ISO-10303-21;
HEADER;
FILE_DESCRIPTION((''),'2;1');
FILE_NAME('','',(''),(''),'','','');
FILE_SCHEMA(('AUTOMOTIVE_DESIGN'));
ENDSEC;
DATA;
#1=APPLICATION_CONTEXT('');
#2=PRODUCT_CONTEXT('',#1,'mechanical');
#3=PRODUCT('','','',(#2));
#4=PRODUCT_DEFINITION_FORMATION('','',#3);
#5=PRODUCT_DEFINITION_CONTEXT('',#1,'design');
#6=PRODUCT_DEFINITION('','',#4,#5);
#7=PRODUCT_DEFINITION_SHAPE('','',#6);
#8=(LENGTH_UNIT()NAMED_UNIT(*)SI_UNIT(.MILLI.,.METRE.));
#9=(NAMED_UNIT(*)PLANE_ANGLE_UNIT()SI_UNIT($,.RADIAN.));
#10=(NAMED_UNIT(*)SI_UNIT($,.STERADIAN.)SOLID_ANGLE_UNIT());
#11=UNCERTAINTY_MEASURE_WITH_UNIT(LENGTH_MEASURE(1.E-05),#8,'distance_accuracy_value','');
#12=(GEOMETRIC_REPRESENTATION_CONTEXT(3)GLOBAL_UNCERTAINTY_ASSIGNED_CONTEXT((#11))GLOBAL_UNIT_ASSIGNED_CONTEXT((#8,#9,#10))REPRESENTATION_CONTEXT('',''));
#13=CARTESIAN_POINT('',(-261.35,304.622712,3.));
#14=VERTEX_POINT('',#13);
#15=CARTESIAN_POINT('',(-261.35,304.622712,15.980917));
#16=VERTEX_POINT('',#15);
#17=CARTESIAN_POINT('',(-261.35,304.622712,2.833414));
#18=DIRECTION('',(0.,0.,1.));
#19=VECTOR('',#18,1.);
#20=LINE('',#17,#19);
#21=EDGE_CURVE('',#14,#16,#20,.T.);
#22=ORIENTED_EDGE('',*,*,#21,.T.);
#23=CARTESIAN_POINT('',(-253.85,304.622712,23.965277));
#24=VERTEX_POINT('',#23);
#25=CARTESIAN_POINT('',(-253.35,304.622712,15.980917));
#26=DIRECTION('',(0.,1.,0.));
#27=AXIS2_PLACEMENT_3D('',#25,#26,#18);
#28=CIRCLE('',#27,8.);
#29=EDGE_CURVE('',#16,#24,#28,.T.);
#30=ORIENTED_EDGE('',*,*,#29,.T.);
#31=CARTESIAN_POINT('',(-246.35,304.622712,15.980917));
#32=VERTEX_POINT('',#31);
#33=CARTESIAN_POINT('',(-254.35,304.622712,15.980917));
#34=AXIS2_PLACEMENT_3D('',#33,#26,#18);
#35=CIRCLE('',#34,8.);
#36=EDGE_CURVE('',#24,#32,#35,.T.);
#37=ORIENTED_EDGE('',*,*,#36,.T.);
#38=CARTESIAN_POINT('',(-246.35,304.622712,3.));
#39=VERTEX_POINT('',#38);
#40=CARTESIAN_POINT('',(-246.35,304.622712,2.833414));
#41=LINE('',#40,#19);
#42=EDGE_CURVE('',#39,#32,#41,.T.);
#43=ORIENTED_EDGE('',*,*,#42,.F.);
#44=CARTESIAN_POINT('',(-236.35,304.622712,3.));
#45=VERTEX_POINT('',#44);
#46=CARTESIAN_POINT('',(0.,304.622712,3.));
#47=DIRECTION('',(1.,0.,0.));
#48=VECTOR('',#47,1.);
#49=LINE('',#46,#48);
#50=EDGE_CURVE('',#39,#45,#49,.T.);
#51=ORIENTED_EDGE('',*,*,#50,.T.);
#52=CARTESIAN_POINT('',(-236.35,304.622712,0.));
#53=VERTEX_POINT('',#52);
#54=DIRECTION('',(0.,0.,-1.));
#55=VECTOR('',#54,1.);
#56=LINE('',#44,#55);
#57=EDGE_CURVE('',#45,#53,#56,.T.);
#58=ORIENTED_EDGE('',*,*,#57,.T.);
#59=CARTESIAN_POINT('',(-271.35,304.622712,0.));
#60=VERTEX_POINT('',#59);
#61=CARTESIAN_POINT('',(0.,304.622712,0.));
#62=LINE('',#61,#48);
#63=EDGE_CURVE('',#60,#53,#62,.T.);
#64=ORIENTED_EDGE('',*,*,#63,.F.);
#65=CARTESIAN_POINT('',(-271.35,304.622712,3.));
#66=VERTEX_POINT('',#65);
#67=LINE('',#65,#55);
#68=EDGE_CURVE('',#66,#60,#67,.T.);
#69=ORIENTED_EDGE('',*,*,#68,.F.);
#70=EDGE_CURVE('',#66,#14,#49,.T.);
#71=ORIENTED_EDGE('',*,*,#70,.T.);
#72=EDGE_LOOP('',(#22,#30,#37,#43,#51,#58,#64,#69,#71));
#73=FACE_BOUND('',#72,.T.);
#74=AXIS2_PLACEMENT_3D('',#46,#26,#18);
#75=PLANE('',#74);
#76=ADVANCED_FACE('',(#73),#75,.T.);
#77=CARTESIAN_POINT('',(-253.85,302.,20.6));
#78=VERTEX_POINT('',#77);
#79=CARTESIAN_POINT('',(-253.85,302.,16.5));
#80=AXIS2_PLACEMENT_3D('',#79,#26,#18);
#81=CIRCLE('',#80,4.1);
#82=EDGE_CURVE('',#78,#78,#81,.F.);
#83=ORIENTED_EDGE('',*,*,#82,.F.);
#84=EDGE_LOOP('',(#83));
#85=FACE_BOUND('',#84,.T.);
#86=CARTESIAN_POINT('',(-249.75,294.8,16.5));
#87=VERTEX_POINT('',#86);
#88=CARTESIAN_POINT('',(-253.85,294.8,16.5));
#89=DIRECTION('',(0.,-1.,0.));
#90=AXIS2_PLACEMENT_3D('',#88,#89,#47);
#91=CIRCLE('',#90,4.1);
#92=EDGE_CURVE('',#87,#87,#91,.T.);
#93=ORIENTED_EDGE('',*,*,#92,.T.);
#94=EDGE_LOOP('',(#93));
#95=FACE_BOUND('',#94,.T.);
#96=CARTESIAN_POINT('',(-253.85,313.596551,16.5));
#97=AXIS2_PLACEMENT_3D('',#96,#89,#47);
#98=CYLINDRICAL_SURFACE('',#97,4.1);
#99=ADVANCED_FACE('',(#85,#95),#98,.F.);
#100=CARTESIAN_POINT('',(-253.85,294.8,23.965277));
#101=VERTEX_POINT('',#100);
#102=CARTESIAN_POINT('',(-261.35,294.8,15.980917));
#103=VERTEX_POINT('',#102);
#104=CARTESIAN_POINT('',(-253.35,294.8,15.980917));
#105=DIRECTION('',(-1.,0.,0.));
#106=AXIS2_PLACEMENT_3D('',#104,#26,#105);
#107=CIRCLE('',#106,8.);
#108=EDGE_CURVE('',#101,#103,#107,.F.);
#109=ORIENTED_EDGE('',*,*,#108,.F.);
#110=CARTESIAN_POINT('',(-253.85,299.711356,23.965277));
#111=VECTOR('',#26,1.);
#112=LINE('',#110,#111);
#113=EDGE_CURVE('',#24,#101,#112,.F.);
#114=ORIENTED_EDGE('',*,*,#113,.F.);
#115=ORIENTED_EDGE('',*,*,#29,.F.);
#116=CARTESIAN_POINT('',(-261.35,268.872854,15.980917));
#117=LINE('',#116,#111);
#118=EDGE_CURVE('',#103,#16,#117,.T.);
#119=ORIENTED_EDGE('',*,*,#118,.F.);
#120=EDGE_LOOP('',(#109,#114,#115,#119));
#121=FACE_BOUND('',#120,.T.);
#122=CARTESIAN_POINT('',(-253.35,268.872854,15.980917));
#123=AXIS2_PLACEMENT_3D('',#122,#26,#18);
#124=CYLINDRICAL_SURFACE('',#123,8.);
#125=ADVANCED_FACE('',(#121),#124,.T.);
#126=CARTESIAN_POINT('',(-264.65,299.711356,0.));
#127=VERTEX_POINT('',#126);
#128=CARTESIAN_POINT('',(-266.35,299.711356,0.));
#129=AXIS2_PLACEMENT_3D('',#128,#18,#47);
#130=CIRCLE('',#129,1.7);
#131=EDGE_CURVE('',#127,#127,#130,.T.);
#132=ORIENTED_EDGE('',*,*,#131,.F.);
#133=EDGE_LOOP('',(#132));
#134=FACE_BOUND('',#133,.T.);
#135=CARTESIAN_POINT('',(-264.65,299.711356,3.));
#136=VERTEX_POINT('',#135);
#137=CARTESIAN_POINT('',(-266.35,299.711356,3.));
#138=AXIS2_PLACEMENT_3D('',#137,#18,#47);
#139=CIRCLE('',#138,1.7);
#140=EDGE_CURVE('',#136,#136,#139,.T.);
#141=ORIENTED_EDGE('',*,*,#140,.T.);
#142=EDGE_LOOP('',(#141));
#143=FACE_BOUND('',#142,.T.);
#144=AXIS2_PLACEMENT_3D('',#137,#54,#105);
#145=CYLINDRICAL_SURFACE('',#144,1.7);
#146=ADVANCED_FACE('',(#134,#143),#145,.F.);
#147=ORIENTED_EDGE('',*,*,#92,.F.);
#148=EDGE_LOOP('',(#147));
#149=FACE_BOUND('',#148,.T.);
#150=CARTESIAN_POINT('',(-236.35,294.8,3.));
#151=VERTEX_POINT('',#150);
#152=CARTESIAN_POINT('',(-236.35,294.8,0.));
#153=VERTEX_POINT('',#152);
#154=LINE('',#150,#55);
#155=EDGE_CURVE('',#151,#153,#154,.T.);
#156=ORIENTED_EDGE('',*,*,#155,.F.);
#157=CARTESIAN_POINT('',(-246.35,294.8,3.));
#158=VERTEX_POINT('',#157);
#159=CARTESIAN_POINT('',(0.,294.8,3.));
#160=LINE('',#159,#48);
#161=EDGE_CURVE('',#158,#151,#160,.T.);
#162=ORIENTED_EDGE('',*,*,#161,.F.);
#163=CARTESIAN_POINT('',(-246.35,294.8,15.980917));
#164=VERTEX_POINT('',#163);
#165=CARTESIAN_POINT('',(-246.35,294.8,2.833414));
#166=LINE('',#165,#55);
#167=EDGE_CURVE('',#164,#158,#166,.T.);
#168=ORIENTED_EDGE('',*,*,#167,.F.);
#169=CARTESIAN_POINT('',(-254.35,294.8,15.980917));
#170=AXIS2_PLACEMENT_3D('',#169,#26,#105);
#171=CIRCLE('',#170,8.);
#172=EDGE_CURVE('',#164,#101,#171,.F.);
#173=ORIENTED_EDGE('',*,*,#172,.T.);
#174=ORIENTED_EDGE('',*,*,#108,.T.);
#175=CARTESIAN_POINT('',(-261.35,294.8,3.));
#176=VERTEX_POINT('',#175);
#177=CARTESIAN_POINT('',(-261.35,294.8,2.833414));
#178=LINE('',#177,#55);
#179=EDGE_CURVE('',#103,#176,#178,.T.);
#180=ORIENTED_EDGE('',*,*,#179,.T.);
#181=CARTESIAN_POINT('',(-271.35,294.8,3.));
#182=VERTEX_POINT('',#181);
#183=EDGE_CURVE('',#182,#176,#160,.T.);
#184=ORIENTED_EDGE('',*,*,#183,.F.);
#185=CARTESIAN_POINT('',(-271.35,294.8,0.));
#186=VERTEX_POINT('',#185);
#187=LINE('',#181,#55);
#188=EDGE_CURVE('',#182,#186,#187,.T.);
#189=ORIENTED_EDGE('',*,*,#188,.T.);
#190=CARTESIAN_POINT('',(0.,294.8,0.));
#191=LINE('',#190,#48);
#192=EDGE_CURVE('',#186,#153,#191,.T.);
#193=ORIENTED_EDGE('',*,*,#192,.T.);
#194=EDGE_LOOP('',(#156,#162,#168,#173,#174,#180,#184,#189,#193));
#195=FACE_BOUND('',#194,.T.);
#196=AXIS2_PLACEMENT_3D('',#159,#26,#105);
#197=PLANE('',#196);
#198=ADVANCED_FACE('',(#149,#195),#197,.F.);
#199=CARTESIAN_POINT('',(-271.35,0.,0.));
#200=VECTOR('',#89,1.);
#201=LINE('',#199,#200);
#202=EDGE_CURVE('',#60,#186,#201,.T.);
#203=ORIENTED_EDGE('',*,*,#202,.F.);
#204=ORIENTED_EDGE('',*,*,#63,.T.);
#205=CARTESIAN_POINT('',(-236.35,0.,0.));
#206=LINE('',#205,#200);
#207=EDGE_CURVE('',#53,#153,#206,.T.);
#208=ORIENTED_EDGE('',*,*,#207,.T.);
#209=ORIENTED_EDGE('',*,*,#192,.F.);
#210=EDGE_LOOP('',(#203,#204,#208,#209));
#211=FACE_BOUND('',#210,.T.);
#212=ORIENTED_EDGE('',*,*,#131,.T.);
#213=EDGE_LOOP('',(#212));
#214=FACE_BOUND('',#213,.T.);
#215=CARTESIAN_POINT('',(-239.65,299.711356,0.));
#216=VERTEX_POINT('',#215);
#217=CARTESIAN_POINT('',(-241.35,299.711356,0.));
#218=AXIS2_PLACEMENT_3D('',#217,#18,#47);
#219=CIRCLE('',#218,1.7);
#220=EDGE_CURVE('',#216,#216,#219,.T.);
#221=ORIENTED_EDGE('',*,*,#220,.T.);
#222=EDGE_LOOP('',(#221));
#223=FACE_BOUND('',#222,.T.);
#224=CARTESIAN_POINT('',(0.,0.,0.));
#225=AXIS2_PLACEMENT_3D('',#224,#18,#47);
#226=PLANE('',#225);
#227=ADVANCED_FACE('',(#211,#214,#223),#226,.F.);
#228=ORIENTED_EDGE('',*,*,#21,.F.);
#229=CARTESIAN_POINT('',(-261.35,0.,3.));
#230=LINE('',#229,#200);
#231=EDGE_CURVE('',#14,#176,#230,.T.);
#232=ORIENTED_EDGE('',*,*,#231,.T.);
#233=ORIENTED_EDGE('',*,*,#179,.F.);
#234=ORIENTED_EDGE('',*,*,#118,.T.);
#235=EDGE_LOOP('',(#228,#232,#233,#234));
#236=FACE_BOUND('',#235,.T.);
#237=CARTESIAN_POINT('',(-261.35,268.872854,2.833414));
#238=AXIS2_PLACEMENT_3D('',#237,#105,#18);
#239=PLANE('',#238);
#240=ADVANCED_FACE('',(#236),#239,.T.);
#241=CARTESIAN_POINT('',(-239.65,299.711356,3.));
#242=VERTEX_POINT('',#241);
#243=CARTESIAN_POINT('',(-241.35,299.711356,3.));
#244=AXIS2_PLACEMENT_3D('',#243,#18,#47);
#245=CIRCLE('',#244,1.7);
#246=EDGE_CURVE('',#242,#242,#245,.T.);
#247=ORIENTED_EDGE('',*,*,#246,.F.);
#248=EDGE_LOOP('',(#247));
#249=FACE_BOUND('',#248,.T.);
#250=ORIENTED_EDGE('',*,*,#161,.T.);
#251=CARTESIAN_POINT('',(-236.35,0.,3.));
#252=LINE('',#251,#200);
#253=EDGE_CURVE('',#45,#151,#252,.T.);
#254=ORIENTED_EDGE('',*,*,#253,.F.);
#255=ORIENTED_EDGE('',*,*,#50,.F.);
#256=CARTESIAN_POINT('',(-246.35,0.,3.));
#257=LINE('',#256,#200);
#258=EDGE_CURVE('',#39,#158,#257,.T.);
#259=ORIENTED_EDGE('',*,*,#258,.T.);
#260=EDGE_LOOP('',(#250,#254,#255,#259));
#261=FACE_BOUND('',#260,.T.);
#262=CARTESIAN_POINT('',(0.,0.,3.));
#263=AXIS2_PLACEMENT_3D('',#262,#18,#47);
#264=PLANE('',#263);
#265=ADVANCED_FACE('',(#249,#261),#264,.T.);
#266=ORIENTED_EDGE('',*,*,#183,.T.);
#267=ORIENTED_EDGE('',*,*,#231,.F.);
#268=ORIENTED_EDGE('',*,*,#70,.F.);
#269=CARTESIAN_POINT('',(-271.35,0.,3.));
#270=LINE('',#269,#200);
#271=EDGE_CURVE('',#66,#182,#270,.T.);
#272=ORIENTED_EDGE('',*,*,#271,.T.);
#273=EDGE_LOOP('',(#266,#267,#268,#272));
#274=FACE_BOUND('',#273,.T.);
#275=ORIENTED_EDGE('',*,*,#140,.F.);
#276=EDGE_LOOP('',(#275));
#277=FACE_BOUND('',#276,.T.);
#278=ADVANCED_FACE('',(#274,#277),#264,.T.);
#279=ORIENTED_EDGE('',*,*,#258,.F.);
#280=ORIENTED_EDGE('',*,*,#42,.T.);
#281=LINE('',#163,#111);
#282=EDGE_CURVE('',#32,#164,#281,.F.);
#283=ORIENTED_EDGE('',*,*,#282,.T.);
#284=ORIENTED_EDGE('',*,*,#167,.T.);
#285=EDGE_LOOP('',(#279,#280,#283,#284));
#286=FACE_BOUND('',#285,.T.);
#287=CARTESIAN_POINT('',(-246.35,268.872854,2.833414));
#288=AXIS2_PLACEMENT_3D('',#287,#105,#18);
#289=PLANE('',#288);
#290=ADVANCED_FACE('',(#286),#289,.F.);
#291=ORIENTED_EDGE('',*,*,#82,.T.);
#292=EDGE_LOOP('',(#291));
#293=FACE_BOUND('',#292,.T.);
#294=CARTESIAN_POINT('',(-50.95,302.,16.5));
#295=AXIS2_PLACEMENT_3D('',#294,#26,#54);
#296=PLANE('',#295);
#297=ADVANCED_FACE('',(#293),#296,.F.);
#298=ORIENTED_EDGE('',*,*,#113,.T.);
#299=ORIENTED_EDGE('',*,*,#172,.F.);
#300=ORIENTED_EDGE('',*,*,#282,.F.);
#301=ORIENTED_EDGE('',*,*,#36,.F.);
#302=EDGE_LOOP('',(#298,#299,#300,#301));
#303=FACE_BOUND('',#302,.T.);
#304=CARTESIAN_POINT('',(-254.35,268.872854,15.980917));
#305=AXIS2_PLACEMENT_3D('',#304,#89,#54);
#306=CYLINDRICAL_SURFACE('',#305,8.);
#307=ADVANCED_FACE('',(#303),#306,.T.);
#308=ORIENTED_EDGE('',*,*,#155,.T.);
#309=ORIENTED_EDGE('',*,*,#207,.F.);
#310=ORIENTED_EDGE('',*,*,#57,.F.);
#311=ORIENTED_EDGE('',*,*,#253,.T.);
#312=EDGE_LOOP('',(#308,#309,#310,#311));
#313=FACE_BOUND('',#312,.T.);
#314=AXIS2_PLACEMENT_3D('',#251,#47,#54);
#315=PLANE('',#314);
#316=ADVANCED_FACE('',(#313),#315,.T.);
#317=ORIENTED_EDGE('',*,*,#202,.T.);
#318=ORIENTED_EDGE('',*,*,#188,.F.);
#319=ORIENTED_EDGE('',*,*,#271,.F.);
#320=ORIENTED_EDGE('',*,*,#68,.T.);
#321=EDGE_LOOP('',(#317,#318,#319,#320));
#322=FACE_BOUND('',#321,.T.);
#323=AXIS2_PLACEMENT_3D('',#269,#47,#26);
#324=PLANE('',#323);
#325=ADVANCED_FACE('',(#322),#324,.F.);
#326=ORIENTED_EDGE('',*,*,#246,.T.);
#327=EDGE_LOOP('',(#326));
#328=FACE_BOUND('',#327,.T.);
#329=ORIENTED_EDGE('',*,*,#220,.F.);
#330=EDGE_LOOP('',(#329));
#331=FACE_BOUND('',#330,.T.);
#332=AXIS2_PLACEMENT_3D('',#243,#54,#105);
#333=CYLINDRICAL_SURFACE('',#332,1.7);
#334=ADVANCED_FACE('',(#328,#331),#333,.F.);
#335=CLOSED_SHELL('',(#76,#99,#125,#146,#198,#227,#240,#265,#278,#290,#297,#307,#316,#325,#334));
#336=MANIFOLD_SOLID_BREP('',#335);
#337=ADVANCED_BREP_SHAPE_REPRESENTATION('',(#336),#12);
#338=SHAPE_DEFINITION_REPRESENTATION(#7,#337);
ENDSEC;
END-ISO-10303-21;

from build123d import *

# Parameters (mm, degrees)
BOSS_EXTRUDE1_DEPTH = 3
SKETCH2_W           = 15
SKETCH2_H           = 21.14750363
BOSS_EXTRUDE2_DEPTH = 9.822712027
FILLET1_R           = 8
CUT_EXTRUDE1_START  = -7.2
SKETCH3_R           = 4.1
CUT_EXTRUDE1_DEPTH  = 7.2


with BuildPart() as part:
    # Sketch1 → Boss-Extrude1 (new body)
    with BuildSketch(Plane.XY):
        with BuildLine():
            Line((-241.35, 304.622712027), (-266.35, 304.622712027))
            Line((-266.35, 304.622712027), (-266.35, 301.411356013))
            ThreePointArc((-266.35, 301.411356013), (-265.147918472, 300.913437541), (-264.65, 299.711356013))
            ThreePointArc((-264.65, 299.711356013), (-265.147918472, 298.509274485), (-266.35, 298.011356013))
            Line((-266.35, 298.011356013), (-266.35, 294.8))
            Line((-266.35, 294.8), (-241.35, 294.8))
            Line((-241.35, 294.8), (-241.35, 298.011356013))
            ThreePointArc((-241.35, 298.011356013), (-243.05, 299.711356013), (-241.35, 301.411356013))
            Line((-241.35, 301.411356013), (-241.35, 304.622712027))
        make_face()
        with BuildLine():
            Line((-266.35, 304.622712027), (-271.35, 304.622712027))
            Line((-271.35, 304.622712027), (-271.35, 294.8))
            Line((-271.35, 294.8), (-269.799999998, 294.8))
            Line((-269.799999998, 294.8), (-266.35, 294.8))
            Line((-266.35, 294.8), (-266.35, 298.011356013))
            ThreePointArc((-266.35, 298.011356013), (-268.05, 299.711356013), (-266.35, 301.411356013))
            Line((-266.35, 301.411356013), (-266.35, 304.622712027))
        make_face()
        with BuildLine():
            Line((-236.35, 304.622712027), (-241.35, 304.622712027))
            Line((-241.35, 304.622712027), (-241.35, 301.411356013))
            ThreePointArc((-241.35, 301.411356013), (-240.147918472, 300.913437541), (-239.65, 299.711356013))
            ThreePointArc((-239.65, 299.711356013), (-240.147918472, 298.509274485), (-241.35, 298.011356013))
            Line((-241.35, 298.011356013), (-241.35, 294.8))
            Line((-241.35, 294.8), (-236.35, 294.8))
            Line((-236.35, 294.8), (-236.35, 304.622712027))
        make_face()
    extrude(amount=BOSS_EXTRUDE1_DEPTH)

    # Sketch2 → Boss-Extrude2 (add)
    with BuildSketch(Plane(origin=(0, 304.622712027, 0), x_dir=(1, 0, 0), z_dir=(0, 1, 0))):
        with Locations((-253.85, -13.407165318)):
            Rectangle(SKETCH2_W, SKETCH2_H)
    extrude(amount=-BOSS_EXTRUDE2_DEPTH)

    # Fillet1
    # the kernel refuses this fillet: 8 mm, written as the material it takes off along each edge
    with BuildSketch(Plane(origin=(-246.35, 324.622712027, 23.980917133), x_dir=(0, 0, -1), z_dir=(0, -1, 0))) as fillet1_piece_1:
        with BuildLine():
            CenterArc((FILLET1_R, -FILLET1_R), FILLET1_R, 90, 90)
            Line((0, -FILLET1_R), (0, 0))
            Line((0, 0), (FILLET1_R, 0))
        make_face()
    extrude(amount=49.822712027, mode=Mode.SUBTRACT)
    with BuildSketch(Plane(origin=(-261.35, 324.622712027, 23.980917133), x_dir=(0, 0, -1), z_dir=(0, -1, 0))) as fillet1_piece_2:
        with BuildLine():
            CenterArc((FILLET1_R, FILLET1_R), FILLET1_R, 180, 90)
            Line((0, FILLET1_R), (0, 0))
            Line((0, 0), (FILLET1_R, 0))
        make_face()
    extrude(amount=49.822712027, mode=Mode.SUBTRACT)

    # Sketch3 → Cut-Extrude1 (cut)
    with BuildSketch(Plane.XZ.offset(-294.8).offset(CUT_EXTRUDE1_START)):
        with Locations((-253.85, 16.5)):
            Circle(SKETCH3_R)
    extrude(amount=CUT_EXTRUDE1_DEPTH, mode=Mode.SUBTRACT)


solid = part.part
